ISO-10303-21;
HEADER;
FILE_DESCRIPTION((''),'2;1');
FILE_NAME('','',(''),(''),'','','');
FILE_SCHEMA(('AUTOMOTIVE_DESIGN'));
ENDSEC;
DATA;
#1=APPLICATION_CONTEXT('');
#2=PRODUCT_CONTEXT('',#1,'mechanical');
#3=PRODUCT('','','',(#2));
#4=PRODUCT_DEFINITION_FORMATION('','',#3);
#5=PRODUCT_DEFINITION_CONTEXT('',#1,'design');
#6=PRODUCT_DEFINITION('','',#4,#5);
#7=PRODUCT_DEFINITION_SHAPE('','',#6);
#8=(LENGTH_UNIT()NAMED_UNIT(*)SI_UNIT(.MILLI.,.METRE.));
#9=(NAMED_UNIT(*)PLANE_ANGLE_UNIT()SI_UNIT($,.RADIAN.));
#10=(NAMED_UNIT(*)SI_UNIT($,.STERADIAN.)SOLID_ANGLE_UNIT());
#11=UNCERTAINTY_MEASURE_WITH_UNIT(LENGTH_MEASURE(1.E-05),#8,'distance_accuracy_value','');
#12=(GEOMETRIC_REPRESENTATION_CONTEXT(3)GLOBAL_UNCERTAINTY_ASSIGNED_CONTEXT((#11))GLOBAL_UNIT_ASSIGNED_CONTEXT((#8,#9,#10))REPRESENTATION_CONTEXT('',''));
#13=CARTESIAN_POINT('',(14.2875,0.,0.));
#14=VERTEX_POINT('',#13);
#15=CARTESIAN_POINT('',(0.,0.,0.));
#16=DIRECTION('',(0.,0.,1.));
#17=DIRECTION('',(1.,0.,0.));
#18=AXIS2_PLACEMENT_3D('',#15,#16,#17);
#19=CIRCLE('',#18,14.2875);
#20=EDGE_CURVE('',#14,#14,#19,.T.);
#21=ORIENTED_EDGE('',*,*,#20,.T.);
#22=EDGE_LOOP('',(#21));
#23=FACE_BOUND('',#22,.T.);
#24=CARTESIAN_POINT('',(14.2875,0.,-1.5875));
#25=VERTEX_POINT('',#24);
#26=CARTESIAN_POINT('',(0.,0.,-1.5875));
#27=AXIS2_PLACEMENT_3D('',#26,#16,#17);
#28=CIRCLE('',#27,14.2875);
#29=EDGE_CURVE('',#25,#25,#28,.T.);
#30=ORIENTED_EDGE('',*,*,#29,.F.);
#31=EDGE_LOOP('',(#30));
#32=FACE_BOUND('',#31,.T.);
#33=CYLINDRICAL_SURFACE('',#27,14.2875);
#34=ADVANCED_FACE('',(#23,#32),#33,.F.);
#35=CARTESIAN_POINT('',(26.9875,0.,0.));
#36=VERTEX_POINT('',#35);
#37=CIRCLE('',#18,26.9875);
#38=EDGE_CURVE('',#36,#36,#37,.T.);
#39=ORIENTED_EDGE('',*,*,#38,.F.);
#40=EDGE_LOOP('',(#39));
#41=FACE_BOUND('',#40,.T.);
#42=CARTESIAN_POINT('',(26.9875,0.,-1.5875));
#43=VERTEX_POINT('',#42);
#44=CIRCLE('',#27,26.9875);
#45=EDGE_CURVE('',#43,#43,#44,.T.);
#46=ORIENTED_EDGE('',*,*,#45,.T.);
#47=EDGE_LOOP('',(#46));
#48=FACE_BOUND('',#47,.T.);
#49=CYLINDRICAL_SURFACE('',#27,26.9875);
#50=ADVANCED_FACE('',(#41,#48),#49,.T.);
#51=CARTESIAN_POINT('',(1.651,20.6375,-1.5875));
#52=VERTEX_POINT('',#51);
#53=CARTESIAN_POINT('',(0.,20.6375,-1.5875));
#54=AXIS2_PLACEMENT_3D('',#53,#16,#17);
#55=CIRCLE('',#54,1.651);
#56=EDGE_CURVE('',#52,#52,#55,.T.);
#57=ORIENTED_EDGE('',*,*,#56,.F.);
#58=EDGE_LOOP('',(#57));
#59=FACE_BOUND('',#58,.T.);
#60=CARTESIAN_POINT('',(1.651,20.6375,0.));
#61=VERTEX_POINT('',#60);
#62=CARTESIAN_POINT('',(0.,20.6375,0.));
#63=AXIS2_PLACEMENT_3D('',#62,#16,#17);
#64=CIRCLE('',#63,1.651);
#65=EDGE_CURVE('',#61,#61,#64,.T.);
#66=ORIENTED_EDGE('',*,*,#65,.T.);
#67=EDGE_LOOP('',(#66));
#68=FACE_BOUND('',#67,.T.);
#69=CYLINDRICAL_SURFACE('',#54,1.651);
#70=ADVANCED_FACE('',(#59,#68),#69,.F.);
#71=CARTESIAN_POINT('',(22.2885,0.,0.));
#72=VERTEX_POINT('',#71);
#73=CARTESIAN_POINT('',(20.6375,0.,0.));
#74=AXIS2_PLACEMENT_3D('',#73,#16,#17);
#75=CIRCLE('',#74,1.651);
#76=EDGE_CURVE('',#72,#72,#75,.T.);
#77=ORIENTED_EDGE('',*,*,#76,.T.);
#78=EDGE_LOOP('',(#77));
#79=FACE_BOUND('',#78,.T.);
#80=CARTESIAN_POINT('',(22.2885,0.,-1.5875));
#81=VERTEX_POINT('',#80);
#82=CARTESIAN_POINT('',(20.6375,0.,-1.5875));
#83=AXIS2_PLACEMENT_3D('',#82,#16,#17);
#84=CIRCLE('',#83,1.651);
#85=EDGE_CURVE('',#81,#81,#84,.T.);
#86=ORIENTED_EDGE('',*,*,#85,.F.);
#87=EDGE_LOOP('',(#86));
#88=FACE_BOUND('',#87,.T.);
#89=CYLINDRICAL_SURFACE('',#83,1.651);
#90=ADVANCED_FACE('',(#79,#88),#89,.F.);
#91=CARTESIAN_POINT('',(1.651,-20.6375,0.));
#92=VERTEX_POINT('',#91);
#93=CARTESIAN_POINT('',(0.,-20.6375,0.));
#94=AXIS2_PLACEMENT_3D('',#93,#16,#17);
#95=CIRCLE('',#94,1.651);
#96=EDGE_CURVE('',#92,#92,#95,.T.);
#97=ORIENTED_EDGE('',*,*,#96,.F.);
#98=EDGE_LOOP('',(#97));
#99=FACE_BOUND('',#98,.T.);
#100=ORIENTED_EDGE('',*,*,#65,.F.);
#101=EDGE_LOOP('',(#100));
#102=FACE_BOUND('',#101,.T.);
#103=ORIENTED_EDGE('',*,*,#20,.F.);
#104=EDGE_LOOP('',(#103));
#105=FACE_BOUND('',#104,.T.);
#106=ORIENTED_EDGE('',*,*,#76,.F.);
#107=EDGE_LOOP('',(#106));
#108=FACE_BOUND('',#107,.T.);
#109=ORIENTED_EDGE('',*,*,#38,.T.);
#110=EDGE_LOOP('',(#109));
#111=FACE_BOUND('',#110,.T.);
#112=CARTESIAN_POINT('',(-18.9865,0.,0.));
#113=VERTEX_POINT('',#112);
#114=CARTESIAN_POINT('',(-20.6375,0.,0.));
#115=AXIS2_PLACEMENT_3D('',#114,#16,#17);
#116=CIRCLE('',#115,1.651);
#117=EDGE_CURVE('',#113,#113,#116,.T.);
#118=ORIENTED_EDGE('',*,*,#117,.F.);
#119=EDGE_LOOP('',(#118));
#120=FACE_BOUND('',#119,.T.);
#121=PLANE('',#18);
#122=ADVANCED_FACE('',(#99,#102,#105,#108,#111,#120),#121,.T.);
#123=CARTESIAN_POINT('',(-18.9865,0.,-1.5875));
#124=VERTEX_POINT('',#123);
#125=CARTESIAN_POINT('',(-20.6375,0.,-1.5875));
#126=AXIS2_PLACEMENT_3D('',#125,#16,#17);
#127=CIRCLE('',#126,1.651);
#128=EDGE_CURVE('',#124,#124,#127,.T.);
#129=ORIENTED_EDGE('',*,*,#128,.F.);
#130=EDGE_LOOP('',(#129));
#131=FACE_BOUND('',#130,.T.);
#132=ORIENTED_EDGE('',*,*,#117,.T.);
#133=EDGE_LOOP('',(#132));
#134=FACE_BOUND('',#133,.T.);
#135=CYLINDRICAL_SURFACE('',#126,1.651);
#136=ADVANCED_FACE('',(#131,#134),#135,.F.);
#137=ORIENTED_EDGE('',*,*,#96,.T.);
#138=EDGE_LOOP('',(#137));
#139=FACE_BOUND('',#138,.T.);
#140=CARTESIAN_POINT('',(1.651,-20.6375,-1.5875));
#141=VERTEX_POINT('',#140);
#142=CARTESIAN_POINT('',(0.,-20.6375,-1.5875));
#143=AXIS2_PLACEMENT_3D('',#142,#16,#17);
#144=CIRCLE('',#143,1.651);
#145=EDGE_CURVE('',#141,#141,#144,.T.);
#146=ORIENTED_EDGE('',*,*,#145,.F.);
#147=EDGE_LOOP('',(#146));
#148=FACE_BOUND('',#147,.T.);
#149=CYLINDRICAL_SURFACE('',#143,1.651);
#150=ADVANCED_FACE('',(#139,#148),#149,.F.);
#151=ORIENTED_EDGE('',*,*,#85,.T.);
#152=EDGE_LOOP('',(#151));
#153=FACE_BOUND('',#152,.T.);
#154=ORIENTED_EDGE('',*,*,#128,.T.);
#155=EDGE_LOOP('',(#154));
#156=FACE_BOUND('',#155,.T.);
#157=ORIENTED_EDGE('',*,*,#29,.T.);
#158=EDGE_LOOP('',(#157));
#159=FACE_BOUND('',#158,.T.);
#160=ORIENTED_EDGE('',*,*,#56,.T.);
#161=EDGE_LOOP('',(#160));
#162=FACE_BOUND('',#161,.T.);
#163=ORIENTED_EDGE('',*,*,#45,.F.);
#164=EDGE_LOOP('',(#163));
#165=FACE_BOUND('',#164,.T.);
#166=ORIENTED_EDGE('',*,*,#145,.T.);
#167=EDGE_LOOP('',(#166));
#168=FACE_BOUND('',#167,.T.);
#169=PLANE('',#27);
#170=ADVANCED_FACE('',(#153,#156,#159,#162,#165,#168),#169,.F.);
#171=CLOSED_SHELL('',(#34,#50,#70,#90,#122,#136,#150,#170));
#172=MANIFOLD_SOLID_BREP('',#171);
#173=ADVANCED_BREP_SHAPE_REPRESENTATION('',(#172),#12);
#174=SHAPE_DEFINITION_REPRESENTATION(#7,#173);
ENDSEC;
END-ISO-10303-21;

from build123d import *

# Parameters (mm, degrees)
SKETCH1_R          = 26.9875
SKETCH1_R_2        = 14.2875
BASE_FLANGE1_DEPTH = 1.5875
SKETCH6_R          = 1.651
CUT_EXTRUDE1_DEPTH = 39.199089894


# Sheet-metal steps are written as plain solids
with BuildPart() as part:
    # Sketch1 → Base-Flange1 (new body)
    with BuildSketch(Plane.XY):
        Circle(SKETCH1_R)
        Circle(SKETCH1_R_2, mode=Mode.SUBTRACT)
    extrude(amount=-BASE_FLANGE1_DEPTH)

    # Sketch6 → Cut-Extrude1 (cut, through all)
    with BuildSketch(Plane.XY):
        with Locations((0, 20.6375)):
            Circle(SKETCH6_R)
        with Locations((20.6375, 0)):
            Circle(SKETCH6_R)
        with Locations((0, -20.6375)):
            Circle(SKETCH6_R)
        with Locations((-20.6375, 0)):
            Circle(SKETCH6_R)
    extrude(amount=-CUT_EXTRUDE1_DEPTH, mode=Mode.SUBTRACT)


solid = part.part
